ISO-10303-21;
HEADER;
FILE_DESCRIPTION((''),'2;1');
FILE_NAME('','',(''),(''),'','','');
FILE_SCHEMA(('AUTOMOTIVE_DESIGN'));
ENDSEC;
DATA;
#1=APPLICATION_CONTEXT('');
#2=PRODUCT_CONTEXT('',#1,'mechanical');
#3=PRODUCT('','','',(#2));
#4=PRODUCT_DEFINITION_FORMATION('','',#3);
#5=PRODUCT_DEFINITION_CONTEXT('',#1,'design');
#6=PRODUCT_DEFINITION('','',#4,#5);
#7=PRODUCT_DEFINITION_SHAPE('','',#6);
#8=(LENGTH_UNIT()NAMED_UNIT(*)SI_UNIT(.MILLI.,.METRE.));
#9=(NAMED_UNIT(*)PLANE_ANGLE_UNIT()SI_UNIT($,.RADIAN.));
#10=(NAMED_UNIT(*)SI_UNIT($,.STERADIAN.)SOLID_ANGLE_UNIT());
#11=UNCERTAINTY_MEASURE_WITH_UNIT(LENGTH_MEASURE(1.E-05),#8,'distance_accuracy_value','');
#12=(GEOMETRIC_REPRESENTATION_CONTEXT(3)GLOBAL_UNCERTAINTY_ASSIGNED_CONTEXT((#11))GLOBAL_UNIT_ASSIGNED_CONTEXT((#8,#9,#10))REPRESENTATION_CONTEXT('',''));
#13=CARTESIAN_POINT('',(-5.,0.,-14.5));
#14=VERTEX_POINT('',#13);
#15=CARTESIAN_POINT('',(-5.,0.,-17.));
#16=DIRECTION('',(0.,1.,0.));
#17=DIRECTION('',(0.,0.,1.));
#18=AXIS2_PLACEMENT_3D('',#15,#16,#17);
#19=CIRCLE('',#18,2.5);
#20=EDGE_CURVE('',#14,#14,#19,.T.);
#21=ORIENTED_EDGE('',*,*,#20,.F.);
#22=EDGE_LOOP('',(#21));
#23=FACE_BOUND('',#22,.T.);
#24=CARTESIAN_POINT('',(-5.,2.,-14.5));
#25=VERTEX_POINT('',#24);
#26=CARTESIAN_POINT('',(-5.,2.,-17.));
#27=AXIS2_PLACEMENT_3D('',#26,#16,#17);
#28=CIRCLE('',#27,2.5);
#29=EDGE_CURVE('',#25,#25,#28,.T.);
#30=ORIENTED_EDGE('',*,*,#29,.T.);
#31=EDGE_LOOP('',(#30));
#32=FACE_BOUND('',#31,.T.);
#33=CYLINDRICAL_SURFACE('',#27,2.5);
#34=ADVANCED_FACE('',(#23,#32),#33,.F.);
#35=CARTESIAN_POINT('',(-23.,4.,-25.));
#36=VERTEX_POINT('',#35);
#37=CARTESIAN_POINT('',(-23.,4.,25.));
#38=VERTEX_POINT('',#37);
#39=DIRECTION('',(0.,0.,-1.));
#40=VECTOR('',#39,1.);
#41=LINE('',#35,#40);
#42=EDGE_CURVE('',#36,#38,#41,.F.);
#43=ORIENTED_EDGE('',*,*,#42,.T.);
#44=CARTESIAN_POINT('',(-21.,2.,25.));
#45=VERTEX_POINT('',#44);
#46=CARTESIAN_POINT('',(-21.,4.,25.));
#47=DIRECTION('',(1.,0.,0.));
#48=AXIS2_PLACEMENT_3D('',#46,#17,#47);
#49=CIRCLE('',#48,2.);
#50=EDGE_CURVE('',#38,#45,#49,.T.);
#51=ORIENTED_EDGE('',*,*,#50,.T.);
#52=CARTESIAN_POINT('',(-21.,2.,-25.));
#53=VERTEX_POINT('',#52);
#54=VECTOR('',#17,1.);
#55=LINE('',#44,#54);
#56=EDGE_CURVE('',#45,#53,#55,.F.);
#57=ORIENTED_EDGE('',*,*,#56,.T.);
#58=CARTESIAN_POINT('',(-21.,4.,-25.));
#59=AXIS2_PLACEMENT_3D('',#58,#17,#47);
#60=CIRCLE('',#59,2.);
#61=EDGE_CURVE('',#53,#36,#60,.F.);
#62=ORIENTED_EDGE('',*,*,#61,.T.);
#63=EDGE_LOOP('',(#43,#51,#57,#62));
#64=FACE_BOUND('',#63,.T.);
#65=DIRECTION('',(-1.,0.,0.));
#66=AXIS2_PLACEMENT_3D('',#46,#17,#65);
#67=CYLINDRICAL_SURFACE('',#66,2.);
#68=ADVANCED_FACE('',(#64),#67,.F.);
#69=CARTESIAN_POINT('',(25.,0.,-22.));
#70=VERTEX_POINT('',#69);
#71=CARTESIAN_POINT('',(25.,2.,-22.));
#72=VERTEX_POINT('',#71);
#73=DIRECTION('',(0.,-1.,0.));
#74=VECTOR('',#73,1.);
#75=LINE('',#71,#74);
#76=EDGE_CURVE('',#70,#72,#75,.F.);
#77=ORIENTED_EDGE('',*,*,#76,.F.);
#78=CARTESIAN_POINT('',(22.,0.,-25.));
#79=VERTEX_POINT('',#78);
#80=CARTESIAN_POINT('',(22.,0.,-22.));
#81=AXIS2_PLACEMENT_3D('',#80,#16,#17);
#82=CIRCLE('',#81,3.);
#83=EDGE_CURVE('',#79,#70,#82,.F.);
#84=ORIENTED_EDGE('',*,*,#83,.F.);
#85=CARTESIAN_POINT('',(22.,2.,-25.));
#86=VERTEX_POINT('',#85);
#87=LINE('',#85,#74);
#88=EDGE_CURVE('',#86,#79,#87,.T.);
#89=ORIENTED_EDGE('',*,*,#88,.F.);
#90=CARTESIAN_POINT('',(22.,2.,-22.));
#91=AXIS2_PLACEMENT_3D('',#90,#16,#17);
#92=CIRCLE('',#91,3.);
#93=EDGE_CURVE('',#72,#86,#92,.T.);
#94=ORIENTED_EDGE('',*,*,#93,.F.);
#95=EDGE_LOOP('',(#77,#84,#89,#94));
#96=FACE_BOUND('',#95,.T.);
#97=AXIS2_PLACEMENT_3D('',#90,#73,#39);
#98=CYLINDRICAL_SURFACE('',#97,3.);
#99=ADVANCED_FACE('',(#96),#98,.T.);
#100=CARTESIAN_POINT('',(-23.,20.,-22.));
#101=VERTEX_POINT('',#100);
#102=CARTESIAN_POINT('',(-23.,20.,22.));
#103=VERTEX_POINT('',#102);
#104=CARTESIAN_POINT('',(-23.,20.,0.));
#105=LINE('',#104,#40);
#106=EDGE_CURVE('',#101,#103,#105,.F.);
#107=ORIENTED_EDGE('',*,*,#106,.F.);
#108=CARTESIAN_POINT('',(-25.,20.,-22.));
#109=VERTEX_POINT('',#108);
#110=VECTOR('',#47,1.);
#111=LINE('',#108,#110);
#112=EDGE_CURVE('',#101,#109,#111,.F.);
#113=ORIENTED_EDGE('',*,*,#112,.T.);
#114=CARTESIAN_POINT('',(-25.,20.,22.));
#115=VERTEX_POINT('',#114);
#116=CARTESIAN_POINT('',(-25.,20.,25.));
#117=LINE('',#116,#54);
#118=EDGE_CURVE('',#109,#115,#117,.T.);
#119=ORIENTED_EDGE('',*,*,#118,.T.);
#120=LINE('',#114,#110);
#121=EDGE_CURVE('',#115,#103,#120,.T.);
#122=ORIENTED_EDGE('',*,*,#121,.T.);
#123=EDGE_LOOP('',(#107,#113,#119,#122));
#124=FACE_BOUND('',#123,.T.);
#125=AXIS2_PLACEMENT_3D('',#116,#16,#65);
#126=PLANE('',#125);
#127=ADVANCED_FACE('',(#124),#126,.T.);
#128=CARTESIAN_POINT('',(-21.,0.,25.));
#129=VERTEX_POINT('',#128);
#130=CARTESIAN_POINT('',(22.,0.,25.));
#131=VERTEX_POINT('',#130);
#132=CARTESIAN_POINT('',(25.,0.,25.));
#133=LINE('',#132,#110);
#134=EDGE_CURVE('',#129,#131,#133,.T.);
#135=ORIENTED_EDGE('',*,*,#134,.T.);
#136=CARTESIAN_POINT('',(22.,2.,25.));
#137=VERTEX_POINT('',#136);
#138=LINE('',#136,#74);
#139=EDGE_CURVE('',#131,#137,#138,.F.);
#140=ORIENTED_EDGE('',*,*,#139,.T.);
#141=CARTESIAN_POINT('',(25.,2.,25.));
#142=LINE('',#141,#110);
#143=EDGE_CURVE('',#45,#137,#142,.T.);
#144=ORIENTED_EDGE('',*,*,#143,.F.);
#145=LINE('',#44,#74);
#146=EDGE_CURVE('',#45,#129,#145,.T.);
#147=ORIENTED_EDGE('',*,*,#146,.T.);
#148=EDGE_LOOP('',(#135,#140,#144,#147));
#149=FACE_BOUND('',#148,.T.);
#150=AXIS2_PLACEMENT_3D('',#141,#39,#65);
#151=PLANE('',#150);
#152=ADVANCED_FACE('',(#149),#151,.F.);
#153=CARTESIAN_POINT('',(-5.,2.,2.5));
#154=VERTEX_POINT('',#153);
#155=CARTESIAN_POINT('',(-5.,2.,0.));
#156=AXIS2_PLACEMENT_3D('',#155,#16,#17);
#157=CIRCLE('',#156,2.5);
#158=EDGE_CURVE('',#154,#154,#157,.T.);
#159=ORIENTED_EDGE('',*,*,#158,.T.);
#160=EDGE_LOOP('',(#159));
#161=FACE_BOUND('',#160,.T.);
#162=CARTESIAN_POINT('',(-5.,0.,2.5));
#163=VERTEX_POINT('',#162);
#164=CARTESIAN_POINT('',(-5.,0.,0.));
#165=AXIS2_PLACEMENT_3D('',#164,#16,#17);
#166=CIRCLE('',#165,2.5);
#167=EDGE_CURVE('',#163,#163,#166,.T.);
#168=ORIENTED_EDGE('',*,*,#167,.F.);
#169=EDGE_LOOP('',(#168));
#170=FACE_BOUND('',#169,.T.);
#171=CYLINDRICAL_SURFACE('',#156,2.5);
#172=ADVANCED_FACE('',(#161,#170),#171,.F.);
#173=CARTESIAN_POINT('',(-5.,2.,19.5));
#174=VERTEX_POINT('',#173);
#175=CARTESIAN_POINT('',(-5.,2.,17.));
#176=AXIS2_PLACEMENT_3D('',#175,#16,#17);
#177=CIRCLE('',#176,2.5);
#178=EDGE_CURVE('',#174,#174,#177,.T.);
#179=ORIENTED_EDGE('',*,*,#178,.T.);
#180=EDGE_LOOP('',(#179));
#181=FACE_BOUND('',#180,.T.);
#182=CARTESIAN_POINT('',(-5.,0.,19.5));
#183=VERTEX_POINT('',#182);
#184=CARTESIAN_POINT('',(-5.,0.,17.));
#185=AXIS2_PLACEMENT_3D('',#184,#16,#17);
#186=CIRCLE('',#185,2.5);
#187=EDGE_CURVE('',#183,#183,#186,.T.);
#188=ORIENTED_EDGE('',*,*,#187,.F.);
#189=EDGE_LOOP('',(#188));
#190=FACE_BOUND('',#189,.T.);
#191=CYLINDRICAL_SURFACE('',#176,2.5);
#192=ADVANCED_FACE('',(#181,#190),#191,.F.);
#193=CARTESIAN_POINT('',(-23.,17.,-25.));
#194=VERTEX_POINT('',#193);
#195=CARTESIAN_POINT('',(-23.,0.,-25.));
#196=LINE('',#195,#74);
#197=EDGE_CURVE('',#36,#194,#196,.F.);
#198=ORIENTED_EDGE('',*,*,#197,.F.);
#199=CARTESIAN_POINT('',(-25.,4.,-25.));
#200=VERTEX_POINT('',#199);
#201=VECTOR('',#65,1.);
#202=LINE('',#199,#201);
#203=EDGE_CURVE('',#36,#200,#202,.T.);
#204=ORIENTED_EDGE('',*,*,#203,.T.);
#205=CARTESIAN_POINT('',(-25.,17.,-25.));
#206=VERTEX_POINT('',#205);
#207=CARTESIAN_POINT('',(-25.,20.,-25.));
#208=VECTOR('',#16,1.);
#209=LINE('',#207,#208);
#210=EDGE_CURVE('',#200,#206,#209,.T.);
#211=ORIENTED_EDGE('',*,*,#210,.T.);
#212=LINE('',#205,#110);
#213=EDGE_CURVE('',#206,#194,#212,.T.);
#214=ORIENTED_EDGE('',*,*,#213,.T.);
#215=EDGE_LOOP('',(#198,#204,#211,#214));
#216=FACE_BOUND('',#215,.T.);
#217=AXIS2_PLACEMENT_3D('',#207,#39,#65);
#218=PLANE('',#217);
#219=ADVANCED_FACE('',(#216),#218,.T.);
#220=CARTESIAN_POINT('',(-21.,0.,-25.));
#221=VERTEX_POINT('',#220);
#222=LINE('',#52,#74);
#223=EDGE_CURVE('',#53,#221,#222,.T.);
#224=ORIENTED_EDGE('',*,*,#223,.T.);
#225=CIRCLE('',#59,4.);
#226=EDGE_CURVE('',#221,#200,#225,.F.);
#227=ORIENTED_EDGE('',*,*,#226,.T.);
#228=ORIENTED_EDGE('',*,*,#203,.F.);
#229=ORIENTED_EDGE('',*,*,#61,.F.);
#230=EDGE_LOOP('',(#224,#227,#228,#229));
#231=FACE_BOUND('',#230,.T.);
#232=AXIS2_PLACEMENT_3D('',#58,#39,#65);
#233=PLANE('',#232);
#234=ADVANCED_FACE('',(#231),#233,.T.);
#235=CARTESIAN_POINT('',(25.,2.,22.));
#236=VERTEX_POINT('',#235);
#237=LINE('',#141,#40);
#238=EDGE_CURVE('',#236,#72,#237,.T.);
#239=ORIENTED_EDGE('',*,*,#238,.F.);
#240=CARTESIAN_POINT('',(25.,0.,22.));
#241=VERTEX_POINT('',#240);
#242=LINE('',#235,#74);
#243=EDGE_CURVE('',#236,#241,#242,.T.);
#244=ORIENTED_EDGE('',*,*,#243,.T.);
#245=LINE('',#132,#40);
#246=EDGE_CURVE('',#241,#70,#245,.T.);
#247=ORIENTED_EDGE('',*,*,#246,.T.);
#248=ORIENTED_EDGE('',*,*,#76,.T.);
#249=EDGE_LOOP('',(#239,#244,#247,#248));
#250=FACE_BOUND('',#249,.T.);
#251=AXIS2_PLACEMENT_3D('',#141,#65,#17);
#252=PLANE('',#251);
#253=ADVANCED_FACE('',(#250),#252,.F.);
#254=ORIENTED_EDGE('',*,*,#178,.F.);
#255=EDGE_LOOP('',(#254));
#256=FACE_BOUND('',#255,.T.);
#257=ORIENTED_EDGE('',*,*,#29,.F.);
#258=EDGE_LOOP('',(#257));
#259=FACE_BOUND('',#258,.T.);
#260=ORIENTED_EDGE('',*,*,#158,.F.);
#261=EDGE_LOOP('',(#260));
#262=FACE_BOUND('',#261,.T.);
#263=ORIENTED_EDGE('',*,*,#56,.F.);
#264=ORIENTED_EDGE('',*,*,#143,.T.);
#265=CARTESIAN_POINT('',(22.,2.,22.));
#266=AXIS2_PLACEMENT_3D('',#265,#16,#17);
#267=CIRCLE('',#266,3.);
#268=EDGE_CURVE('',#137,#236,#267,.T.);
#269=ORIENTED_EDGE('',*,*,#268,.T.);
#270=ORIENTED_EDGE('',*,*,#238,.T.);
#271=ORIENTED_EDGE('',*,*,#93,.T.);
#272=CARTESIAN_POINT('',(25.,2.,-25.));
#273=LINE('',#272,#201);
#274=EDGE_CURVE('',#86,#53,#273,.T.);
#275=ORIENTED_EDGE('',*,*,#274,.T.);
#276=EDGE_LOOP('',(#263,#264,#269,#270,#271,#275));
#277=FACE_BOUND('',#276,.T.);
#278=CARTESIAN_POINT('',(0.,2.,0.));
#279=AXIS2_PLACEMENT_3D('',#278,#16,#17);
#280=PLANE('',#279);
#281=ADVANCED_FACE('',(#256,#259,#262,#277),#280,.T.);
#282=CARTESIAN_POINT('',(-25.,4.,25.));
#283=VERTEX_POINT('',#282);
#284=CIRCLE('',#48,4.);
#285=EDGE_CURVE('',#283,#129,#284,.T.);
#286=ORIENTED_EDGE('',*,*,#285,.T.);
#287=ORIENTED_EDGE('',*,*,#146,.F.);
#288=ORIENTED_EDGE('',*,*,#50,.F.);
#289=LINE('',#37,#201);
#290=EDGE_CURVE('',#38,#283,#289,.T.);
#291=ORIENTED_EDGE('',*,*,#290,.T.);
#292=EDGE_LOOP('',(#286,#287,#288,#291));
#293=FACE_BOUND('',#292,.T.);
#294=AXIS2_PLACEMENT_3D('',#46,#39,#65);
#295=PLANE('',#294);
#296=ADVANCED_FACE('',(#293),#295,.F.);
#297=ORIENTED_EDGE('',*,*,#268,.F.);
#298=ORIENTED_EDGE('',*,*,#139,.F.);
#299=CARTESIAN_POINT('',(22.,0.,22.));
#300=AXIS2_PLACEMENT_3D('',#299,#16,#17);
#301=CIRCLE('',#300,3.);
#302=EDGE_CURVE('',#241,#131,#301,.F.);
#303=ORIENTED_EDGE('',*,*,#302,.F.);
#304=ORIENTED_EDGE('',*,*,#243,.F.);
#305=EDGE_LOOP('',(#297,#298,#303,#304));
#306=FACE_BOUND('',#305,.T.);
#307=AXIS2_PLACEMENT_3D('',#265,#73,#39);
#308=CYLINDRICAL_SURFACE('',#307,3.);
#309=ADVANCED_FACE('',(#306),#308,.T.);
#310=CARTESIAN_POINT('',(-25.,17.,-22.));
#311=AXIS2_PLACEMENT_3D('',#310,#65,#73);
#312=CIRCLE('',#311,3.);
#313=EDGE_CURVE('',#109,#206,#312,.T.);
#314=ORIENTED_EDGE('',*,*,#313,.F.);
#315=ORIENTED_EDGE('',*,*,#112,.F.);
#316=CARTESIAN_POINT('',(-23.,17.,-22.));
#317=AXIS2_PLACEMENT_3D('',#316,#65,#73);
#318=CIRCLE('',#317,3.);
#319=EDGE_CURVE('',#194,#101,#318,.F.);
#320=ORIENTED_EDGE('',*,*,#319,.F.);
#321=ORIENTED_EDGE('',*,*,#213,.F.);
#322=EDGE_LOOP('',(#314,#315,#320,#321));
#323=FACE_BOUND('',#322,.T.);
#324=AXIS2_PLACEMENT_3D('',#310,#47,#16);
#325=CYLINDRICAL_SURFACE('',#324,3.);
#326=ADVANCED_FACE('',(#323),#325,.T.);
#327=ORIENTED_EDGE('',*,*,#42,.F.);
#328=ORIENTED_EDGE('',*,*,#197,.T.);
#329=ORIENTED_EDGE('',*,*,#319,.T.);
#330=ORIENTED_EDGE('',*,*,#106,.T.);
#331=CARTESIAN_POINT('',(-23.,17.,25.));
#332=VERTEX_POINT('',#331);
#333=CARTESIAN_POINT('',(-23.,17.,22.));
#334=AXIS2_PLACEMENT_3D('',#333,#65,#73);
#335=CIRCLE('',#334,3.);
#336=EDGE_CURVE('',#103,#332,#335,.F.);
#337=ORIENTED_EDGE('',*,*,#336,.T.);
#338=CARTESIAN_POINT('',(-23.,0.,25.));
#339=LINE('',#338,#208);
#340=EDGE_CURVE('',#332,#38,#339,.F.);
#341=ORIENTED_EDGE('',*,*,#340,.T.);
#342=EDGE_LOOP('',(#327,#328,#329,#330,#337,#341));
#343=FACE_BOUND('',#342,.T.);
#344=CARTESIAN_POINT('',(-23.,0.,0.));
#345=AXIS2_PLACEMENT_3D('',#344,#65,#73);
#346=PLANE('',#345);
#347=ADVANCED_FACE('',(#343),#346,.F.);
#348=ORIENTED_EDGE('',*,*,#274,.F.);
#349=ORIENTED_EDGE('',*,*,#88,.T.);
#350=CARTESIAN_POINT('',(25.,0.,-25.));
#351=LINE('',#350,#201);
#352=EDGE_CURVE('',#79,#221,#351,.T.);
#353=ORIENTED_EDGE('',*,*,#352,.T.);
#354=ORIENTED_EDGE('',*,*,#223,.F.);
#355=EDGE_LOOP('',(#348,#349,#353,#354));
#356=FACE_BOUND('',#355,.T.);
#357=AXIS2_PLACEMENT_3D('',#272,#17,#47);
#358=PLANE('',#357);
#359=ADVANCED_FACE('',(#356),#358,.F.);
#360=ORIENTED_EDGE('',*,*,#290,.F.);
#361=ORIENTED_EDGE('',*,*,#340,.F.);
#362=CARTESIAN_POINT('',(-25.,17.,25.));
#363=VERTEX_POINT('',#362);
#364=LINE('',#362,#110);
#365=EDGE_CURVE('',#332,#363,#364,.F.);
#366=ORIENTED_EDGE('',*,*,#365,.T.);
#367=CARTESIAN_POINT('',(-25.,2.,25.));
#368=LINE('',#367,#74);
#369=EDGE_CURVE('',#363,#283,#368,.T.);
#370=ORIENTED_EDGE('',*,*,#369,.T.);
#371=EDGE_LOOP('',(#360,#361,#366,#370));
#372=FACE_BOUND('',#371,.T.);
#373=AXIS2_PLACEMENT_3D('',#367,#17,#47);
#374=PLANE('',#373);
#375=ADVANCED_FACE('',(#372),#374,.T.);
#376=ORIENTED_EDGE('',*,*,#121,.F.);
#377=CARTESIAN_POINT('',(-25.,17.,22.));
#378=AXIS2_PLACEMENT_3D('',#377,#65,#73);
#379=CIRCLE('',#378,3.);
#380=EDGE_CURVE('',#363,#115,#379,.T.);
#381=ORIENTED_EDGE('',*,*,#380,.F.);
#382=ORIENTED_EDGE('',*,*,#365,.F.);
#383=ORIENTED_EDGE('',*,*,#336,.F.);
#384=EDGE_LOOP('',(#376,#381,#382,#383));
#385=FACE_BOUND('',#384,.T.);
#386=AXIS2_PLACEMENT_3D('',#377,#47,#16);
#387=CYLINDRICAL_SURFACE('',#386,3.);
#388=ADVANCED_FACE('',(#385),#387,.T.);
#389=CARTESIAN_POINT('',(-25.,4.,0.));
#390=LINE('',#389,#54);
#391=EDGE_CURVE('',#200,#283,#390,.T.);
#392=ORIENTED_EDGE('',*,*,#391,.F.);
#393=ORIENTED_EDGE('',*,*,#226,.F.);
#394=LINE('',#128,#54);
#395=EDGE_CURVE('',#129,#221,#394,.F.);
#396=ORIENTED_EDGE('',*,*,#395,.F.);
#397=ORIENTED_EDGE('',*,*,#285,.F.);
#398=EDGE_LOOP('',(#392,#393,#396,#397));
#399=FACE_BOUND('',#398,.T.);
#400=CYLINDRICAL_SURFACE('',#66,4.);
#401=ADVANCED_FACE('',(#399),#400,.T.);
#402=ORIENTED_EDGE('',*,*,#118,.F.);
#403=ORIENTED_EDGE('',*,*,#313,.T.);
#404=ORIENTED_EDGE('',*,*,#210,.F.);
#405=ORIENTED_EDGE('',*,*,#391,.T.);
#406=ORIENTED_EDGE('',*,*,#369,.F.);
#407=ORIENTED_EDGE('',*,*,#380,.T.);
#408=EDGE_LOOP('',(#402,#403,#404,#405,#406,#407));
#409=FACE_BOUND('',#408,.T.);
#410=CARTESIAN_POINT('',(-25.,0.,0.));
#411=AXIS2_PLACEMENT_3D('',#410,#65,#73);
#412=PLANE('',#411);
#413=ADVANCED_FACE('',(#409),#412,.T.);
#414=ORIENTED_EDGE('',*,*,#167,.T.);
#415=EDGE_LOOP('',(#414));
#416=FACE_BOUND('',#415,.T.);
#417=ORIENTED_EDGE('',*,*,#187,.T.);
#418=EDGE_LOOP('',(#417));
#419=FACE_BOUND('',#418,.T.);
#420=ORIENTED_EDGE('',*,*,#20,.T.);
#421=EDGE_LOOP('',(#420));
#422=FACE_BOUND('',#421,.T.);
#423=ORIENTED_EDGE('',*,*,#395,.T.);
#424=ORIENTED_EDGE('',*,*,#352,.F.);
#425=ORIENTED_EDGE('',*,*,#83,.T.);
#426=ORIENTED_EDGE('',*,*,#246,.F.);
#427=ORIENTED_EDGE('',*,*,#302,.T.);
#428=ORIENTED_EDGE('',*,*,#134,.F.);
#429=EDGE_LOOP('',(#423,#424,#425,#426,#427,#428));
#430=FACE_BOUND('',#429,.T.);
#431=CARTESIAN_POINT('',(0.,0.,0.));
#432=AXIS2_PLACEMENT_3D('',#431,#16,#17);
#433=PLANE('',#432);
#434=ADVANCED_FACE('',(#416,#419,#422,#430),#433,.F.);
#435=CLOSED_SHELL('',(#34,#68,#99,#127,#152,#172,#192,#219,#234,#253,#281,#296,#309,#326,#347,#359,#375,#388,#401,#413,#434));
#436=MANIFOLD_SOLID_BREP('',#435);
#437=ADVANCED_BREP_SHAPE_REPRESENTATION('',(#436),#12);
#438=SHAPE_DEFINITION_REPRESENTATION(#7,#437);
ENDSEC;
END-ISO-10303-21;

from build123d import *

# Parameters (mm, degrees)
SKETCH1_W                    = 50
SKETCH1_H                    = 50
BASE_FLANGE1_DEPTH           = 2
EDGE_FLANGE1_STRIP_W         = 12
EDGE_FLANGE1_STRIP_H         = 2
EDGE_FLANGE1_STRIP_CUT_DEPTH = 50
EDGE_FLANGE1_DEPTH           = 50
F_5_0MM_DOWEL_HOLE1_D        = 5
FILLET1_R                    = 3


# Sheet-metal steps are written as plain solids
with BuildPart() as part:
    # Sketch1 → Base-Flange1 (new body)
    with BuildSketch(Plane(origin=(0, 0, 0), x_dir=(1, 0, 0), z_dir=(0, 1, 0))):
        Rectangle(SKETCH1_W, SKETCH1_H)
    extrude(amount=BASE_FLANGE1_DEPTH)

    # Edge-Flange1 strip (across the edge) → Edge-Flange1 strip cut (cut)
    with BuildSketch(Plane(origin=(-25, 2, -25), x_dir=(1, 0, 0), z_dir=(0, 0, 1))):
        with Locations((-2, -1)):
            Rectangle(EDGE_FLANGE1_STRIP_W, EDGE_FLANGE1_STRIP_H)
    extrude(amount=EDGE_FLANGE1_STRIP_CUT_DEPTH, mode=Mode.SUBTRACT)

    # Edge-Flange1 section (across the edge) → Edge-Flange1 (add)
    with BuildSketch(Plane(origin=(-25, 2, -25), x_dir=(1, 0, 0), z_dir=(0, 0, 1))):
        with BuildLine():
            Line((0, 2), (0, 18))
            Line((0, 18), (2, 18))
            Line((2, 18), (2, 2))
            ThreePointArc((2, 2), (2.585786438, 0.585786438), (4, 0))
            Line((4, 0), (4, -2))
            ThreePointArc((4, -2), (1.171572875, -0.828427125), (0, 2))
        make_face()
    extrude(amount=EDGE_FLANGE1_DEPTH)

    # Ø5.0mm Dowel Hole1 (through all)
    with Locations(Plane(origin=(0, 2, 0), x_dir=(1, 0, 0), z_dir=(0, 1, 0))):
        with Locations((-5, 17), (-5, 0), (-5, -17)):
            Hole(F_5_0MM_DOWEL_HOLE1_D / 2)

    # Fillet1
    fillet1_edges = [part.edges().sort_by_distance(p)[0] for p in [
        (-24, 20, -25),
        (-24, 20, 25),
        (25, 1, -25),
        (25, 1, 25),
    ]]
    fillet(fillet1_edges, radius=FILLET1_R)


solid = part.part
